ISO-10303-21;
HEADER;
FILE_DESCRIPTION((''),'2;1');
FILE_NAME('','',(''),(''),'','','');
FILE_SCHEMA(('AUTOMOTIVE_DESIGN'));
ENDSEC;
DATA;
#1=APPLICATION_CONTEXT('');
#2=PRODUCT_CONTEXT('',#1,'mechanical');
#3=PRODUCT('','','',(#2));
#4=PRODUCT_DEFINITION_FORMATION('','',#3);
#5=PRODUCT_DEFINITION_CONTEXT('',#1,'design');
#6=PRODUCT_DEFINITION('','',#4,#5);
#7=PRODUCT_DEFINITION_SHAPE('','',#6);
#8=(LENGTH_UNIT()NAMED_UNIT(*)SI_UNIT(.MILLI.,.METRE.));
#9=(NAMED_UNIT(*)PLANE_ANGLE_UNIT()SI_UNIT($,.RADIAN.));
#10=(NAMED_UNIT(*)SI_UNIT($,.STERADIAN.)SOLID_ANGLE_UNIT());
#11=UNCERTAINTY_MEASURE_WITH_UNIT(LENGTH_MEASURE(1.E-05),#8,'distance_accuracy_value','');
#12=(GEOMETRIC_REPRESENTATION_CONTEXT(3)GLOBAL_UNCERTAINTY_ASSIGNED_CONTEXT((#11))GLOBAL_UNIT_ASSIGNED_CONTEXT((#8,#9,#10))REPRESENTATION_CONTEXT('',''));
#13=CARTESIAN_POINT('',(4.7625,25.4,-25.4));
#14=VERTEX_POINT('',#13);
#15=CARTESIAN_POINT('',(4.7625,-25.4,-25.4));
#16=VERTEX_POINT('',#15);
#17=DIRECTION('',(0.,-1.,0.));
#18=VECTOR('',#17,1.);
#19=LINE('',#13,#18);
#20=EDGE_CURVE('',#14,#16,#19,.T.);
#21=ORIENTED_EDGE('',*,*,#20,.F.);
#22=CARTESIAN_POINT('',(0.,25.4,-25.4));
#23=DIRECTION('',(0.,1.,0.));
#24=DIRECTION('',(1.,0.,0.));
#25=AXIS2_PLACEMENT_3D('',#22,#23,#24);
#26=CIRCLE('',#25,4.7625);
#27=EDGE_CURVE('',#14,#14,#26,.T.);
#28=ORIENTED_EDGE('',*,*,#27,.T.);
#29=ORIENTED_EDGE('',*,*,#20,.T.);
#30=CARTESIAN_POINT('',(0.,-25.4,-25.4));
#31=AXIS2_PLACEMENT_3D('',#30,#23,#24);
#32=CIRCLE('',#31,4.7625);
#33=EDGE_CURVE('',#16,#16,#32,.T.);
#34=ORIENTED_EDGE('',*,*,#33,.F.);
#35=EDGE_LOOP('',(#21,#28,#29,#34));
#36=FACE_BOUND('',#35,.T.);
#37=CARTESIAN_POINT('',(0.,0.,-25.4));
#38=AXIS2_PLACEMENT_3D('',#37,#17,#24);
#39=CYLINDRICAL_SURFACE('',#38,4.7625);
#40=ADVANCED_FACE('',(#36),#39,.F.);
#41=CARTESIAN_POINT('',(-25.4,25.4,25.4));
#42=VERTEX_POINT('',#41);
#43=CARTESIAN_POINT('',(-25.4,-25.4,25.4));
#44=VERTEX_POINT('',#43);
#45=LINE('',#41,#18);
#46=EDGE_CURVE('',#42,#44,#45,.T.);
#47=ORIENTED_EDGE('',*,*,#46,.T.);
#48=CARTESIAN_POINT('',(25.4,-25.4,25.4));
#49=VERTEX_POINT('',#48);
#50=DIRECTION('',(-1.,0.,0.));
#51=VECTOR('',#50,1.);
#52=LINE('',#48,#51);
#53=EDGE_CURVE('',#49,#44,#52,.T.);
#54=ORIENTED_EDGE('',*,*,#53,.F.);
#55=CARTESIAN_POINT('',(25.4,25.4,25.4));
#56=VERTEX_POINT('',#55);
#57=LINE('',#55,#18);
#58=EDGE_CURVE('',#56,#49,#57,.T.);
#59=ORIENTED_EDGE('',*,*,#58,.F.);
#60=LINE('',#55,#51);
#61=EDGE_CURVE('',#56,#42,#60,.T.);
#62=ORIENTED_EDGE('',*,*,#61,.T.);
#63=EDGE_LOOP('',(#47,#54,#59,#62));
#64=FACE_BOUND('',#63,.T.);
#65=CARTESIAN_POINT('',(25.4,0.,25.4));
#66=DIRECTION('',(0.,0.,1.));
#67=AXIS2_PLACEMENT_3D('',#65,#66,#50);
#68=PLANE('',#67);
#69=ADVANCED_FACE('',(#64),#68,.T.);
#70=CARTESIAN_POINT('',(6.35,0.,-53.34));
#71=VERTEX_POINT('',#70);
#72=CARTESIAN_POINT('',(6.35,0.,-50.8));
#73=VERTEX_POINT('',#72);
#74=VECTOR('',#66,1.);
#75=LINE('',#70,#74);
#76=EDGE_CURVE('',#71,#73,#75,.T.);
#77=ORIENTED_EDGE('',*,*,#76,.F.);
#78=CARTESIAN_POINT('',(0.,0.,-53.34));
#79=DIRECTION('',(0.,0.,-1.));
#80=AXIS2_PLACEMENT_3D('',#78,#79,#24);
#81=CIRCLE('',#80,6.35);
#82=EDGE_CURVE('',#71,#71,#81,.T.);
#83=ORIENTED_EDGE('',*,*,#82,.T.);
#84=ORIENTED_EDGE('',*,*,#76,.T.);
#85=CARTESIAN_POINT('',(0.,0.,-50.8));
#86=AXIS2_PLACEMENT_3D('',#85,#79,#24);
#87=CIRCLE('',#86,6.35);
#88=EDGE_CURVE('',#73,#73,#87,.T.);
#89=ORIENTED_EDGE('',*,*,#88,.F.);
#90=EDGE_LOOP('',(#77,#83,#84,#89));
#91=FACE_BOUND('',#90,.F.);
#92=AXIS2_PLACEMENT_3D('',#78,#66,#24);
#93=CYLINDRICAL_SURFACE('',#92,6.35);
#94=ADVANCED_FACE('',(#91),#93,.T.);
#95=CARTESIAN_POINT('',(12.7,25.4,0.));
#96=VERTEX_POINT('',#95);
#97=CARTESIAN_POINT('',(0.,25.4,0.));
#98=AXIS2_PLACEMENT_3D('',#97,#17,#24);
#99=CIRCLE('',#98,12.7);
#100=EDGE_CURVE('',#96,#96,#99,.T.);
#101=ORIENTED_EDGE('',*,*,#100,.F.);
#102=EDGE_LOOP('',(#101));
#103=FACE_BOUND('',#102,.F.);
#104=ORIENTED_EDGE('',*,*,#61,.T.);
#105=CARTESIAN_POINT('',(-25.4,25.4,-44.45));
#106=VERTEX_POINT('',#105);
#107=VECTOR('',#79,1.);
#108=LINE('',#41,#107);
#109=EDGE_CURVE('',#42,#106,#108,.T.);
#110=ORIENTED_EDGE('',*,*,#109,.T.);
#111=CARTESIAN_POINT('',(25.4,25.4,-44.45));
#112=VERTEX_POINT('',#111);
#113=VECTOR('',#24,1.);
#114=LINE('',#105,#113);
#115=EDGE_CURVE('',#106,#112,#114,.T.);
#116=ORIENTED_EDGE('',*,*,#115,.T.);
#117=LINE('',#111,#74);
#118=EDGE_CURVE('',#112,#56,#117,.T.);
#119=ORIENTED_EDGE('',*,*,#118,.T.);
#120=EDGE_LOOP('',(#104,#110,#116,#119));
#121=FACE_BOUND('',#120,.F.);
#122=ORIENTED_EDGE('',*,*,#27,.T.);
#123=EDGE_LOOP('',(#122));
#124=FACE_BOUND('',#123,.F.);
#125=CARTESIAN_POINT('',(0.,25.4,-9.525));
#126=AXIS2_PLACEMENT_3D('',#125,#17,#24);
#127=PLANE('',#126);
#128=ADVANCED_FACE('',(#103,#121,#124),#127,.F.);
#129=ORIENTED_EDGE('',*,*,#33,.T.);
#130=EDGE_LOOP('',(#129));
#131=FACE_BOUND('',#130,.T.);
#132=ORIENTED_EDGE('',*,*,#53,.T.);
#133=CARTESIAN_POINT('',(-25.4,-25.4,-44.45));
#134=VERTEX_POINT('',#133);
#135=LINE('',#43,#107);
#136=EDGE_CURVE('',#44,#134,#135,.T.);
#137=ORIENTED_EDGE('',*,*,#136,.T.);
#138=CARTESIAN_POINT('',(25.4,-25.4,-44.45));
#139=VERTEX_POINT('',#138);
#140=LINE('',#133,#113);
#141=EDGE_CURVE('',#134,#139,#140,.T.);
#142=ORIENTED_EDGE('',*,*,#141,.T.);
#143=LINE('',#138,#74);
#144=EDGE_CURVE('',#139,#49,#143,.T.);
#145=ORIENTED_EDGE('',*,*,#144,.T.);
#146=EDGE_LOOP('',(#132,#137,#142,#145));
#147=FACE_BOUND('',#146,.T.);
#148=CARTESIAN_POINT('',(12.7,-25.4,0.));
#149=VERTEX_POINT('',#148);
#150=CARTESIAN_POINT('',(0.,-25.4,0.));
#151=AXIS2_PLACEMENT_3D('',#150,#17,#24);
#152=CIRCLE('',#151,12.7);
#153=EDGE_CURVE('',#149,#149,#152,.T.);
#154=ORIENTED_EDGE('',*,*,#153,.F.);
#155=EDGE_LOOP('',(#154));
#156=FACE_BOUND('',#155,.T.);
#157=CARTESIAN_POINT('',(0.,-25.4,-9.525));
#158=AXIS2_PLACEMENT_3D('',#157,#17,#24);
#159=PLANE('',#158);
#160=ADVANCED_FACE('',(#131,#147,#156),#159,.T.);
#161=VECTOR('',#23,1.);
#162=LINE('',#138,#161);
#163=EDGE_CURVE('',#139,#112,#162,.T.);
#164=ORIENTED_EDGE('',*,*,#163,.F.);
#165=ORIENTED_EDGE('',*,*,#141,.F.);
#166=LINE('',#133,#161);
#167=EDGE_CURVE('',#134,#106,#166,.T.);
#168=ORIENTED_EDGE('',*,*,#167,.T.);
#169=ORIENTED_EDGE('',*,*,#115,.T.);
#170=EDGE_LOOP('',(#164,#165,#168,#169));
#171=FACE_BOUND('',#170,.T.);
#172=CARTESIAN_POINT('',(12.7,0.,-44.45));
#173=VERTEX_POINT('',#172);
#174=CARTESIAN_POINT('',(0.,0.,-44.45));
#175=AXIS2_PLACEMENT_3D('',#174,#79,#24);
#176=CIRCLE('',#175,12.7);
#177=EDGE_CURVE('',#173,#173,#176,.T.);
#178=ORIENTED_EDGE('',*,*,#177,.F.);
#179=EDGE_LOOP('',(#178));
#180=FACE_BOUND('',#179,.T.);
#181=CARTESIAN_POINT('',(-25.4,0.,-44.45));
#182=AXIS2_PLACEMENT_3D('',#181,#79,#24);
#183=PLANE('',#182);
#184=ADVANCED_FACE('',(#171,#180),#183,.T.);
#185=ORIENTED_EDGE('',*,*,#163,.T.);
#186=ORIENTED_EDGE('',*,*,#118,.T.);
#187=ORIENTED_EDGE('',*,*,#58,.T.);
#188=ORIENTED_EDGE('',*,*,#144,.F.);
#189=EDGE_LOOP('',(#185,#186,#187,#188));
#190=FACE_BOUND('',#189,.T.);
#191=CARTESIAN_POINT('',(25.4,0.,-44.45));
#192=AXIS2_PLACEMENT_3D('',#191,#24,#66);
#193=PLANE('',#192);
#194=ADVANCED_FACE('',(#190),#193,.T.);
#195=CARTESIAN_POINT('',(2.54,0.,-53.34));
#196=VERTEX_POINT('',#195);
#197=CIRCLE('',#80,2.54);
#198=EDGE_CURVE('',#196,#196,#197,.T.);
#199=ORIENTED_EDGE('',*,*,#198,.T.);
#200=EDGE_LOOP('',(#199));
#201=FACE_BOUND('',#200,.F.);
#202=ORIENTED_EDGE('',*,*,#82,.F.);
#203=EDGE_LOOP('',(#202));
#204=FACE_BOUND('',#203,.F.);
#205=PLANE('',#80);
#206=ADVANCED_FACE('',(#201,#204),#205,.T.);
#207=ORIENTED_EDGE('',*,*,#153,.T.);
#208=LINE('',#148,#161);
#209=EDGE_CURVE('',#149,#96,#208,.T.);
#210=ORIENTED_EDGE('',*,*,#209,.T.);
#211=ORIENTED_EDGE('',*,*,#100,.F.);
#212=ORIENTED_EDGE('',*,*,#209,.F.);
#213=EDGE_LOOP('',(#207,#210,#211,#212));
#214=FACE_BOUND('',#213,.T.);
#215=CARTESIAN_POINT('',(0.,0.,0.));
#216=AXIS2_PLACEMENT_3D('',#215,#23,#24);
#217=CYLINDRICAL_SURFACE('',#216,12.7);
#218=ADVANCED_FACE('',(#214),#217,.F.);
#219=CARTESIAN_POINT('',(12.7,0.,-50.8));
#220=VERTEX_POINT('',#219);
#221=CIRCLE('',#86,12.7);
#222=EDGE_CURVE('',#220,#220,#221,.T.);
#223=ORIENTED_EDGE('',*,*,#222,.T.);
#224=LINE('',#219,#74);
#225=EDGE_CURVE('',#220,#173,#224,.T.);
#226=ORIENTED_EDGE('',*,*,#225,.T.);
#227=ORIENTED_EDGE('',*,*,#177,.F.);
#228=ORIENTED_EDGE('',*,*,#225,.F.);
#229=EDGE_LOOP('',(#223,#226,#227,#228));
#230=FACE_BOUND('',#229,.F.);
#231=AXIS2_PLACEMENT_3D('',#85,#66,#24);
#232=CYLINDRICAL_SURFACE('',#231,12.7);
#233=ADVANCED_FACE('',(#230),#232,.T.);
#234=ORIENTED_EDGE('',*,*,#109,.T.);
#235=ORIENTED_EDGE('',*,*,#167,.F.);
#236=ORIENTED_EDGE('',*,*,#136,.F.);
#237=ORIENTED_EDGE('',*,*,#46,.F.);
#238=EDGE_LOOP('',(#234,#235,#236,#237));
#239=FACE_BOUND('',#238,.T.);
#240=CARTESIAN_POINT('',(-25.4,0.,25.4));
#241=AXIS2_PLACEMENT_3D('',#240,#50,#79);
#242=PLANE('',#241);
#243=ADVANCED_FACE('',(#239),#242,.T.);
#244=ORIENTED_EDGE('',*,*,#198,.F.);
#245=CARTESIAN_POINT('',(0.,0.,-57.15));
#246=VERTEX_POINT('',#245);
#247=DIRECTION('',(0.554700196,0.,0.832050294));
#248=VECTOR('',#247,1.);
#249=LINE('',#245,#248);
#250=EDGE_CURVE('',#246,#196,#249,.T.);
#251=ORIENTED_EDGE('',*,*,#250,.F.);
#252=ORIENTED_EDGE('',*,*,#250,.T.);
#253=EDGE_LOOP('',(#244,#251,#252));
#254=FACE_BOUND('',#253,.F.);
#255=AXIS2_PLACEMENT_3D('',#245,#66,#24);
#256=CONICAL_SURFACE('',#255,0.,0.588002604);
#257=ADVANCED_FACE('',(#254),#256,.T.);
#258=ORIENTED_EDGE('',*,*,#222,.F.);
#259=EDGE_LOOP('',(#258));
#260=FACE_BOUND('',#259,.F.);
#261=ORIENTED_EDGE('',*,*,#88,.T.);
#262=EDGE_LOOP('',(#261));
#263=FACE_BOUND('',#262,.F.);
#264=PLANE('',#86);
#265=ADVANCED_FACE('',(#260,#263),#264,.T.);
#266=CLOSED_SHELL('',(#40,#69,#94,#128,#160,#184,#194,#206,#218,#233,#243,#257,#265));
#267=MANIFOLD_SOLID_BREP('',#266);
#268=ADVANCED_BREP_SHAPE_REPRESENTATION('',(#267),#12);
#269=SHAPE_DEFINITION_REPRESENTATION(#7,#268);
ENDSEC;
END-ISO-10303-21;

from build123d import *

# Parameters (mm, degrees)
F0_R     = 12.7
F1_DEPTH = 25.4


with BuildPart() as f1:
    # F0 (on Front) → F1 (new body, symmetric)
    with BuildSketch(Plane.XZ):
        Polygon((-12.7, -44.45), (0, -44.45), (12.7, -44.45), (25.4, -44.45), (25.4, 25.4), (-25.4, 25.4), (-25.4, -44.45), align=None)
        with BuildLine():
            ThreePointArc((0, -30.1625), (-3.3675960454, -22.0324039546), (4.7625, -25.4))
            ThreePointArc((4.7625, -25.4), (3.3675960454, -28.7675960454), (0, -30.1625))
        make_face(mode=Mode.SUBTRACT)
        Circle(F0_R, mode=Mode.SUBTRACT)
    extrude(amount=F1_DEPTH, both=True)

    # F0 (on Front) → F2 (revolve)
    with BuildSketch(Plane.XZ):
        Polygon((12.7, -44.45), (0, -44.45), (0, -50.8), (6.35, -50.8), (12.7, -50.8), align=None)
        Polygon((6.35, -50.8), (0, -50.8), (0, -53.34), (2.54, -53.34), (6.35, -53.34), align=None)
        Polygon((2.54, -53.34), (0, -53.34), (0, -57.15), align=None)
    revolve(axis=Axis((0, 0, -41.275), (0, 0, -1)))


solid = f1.part
